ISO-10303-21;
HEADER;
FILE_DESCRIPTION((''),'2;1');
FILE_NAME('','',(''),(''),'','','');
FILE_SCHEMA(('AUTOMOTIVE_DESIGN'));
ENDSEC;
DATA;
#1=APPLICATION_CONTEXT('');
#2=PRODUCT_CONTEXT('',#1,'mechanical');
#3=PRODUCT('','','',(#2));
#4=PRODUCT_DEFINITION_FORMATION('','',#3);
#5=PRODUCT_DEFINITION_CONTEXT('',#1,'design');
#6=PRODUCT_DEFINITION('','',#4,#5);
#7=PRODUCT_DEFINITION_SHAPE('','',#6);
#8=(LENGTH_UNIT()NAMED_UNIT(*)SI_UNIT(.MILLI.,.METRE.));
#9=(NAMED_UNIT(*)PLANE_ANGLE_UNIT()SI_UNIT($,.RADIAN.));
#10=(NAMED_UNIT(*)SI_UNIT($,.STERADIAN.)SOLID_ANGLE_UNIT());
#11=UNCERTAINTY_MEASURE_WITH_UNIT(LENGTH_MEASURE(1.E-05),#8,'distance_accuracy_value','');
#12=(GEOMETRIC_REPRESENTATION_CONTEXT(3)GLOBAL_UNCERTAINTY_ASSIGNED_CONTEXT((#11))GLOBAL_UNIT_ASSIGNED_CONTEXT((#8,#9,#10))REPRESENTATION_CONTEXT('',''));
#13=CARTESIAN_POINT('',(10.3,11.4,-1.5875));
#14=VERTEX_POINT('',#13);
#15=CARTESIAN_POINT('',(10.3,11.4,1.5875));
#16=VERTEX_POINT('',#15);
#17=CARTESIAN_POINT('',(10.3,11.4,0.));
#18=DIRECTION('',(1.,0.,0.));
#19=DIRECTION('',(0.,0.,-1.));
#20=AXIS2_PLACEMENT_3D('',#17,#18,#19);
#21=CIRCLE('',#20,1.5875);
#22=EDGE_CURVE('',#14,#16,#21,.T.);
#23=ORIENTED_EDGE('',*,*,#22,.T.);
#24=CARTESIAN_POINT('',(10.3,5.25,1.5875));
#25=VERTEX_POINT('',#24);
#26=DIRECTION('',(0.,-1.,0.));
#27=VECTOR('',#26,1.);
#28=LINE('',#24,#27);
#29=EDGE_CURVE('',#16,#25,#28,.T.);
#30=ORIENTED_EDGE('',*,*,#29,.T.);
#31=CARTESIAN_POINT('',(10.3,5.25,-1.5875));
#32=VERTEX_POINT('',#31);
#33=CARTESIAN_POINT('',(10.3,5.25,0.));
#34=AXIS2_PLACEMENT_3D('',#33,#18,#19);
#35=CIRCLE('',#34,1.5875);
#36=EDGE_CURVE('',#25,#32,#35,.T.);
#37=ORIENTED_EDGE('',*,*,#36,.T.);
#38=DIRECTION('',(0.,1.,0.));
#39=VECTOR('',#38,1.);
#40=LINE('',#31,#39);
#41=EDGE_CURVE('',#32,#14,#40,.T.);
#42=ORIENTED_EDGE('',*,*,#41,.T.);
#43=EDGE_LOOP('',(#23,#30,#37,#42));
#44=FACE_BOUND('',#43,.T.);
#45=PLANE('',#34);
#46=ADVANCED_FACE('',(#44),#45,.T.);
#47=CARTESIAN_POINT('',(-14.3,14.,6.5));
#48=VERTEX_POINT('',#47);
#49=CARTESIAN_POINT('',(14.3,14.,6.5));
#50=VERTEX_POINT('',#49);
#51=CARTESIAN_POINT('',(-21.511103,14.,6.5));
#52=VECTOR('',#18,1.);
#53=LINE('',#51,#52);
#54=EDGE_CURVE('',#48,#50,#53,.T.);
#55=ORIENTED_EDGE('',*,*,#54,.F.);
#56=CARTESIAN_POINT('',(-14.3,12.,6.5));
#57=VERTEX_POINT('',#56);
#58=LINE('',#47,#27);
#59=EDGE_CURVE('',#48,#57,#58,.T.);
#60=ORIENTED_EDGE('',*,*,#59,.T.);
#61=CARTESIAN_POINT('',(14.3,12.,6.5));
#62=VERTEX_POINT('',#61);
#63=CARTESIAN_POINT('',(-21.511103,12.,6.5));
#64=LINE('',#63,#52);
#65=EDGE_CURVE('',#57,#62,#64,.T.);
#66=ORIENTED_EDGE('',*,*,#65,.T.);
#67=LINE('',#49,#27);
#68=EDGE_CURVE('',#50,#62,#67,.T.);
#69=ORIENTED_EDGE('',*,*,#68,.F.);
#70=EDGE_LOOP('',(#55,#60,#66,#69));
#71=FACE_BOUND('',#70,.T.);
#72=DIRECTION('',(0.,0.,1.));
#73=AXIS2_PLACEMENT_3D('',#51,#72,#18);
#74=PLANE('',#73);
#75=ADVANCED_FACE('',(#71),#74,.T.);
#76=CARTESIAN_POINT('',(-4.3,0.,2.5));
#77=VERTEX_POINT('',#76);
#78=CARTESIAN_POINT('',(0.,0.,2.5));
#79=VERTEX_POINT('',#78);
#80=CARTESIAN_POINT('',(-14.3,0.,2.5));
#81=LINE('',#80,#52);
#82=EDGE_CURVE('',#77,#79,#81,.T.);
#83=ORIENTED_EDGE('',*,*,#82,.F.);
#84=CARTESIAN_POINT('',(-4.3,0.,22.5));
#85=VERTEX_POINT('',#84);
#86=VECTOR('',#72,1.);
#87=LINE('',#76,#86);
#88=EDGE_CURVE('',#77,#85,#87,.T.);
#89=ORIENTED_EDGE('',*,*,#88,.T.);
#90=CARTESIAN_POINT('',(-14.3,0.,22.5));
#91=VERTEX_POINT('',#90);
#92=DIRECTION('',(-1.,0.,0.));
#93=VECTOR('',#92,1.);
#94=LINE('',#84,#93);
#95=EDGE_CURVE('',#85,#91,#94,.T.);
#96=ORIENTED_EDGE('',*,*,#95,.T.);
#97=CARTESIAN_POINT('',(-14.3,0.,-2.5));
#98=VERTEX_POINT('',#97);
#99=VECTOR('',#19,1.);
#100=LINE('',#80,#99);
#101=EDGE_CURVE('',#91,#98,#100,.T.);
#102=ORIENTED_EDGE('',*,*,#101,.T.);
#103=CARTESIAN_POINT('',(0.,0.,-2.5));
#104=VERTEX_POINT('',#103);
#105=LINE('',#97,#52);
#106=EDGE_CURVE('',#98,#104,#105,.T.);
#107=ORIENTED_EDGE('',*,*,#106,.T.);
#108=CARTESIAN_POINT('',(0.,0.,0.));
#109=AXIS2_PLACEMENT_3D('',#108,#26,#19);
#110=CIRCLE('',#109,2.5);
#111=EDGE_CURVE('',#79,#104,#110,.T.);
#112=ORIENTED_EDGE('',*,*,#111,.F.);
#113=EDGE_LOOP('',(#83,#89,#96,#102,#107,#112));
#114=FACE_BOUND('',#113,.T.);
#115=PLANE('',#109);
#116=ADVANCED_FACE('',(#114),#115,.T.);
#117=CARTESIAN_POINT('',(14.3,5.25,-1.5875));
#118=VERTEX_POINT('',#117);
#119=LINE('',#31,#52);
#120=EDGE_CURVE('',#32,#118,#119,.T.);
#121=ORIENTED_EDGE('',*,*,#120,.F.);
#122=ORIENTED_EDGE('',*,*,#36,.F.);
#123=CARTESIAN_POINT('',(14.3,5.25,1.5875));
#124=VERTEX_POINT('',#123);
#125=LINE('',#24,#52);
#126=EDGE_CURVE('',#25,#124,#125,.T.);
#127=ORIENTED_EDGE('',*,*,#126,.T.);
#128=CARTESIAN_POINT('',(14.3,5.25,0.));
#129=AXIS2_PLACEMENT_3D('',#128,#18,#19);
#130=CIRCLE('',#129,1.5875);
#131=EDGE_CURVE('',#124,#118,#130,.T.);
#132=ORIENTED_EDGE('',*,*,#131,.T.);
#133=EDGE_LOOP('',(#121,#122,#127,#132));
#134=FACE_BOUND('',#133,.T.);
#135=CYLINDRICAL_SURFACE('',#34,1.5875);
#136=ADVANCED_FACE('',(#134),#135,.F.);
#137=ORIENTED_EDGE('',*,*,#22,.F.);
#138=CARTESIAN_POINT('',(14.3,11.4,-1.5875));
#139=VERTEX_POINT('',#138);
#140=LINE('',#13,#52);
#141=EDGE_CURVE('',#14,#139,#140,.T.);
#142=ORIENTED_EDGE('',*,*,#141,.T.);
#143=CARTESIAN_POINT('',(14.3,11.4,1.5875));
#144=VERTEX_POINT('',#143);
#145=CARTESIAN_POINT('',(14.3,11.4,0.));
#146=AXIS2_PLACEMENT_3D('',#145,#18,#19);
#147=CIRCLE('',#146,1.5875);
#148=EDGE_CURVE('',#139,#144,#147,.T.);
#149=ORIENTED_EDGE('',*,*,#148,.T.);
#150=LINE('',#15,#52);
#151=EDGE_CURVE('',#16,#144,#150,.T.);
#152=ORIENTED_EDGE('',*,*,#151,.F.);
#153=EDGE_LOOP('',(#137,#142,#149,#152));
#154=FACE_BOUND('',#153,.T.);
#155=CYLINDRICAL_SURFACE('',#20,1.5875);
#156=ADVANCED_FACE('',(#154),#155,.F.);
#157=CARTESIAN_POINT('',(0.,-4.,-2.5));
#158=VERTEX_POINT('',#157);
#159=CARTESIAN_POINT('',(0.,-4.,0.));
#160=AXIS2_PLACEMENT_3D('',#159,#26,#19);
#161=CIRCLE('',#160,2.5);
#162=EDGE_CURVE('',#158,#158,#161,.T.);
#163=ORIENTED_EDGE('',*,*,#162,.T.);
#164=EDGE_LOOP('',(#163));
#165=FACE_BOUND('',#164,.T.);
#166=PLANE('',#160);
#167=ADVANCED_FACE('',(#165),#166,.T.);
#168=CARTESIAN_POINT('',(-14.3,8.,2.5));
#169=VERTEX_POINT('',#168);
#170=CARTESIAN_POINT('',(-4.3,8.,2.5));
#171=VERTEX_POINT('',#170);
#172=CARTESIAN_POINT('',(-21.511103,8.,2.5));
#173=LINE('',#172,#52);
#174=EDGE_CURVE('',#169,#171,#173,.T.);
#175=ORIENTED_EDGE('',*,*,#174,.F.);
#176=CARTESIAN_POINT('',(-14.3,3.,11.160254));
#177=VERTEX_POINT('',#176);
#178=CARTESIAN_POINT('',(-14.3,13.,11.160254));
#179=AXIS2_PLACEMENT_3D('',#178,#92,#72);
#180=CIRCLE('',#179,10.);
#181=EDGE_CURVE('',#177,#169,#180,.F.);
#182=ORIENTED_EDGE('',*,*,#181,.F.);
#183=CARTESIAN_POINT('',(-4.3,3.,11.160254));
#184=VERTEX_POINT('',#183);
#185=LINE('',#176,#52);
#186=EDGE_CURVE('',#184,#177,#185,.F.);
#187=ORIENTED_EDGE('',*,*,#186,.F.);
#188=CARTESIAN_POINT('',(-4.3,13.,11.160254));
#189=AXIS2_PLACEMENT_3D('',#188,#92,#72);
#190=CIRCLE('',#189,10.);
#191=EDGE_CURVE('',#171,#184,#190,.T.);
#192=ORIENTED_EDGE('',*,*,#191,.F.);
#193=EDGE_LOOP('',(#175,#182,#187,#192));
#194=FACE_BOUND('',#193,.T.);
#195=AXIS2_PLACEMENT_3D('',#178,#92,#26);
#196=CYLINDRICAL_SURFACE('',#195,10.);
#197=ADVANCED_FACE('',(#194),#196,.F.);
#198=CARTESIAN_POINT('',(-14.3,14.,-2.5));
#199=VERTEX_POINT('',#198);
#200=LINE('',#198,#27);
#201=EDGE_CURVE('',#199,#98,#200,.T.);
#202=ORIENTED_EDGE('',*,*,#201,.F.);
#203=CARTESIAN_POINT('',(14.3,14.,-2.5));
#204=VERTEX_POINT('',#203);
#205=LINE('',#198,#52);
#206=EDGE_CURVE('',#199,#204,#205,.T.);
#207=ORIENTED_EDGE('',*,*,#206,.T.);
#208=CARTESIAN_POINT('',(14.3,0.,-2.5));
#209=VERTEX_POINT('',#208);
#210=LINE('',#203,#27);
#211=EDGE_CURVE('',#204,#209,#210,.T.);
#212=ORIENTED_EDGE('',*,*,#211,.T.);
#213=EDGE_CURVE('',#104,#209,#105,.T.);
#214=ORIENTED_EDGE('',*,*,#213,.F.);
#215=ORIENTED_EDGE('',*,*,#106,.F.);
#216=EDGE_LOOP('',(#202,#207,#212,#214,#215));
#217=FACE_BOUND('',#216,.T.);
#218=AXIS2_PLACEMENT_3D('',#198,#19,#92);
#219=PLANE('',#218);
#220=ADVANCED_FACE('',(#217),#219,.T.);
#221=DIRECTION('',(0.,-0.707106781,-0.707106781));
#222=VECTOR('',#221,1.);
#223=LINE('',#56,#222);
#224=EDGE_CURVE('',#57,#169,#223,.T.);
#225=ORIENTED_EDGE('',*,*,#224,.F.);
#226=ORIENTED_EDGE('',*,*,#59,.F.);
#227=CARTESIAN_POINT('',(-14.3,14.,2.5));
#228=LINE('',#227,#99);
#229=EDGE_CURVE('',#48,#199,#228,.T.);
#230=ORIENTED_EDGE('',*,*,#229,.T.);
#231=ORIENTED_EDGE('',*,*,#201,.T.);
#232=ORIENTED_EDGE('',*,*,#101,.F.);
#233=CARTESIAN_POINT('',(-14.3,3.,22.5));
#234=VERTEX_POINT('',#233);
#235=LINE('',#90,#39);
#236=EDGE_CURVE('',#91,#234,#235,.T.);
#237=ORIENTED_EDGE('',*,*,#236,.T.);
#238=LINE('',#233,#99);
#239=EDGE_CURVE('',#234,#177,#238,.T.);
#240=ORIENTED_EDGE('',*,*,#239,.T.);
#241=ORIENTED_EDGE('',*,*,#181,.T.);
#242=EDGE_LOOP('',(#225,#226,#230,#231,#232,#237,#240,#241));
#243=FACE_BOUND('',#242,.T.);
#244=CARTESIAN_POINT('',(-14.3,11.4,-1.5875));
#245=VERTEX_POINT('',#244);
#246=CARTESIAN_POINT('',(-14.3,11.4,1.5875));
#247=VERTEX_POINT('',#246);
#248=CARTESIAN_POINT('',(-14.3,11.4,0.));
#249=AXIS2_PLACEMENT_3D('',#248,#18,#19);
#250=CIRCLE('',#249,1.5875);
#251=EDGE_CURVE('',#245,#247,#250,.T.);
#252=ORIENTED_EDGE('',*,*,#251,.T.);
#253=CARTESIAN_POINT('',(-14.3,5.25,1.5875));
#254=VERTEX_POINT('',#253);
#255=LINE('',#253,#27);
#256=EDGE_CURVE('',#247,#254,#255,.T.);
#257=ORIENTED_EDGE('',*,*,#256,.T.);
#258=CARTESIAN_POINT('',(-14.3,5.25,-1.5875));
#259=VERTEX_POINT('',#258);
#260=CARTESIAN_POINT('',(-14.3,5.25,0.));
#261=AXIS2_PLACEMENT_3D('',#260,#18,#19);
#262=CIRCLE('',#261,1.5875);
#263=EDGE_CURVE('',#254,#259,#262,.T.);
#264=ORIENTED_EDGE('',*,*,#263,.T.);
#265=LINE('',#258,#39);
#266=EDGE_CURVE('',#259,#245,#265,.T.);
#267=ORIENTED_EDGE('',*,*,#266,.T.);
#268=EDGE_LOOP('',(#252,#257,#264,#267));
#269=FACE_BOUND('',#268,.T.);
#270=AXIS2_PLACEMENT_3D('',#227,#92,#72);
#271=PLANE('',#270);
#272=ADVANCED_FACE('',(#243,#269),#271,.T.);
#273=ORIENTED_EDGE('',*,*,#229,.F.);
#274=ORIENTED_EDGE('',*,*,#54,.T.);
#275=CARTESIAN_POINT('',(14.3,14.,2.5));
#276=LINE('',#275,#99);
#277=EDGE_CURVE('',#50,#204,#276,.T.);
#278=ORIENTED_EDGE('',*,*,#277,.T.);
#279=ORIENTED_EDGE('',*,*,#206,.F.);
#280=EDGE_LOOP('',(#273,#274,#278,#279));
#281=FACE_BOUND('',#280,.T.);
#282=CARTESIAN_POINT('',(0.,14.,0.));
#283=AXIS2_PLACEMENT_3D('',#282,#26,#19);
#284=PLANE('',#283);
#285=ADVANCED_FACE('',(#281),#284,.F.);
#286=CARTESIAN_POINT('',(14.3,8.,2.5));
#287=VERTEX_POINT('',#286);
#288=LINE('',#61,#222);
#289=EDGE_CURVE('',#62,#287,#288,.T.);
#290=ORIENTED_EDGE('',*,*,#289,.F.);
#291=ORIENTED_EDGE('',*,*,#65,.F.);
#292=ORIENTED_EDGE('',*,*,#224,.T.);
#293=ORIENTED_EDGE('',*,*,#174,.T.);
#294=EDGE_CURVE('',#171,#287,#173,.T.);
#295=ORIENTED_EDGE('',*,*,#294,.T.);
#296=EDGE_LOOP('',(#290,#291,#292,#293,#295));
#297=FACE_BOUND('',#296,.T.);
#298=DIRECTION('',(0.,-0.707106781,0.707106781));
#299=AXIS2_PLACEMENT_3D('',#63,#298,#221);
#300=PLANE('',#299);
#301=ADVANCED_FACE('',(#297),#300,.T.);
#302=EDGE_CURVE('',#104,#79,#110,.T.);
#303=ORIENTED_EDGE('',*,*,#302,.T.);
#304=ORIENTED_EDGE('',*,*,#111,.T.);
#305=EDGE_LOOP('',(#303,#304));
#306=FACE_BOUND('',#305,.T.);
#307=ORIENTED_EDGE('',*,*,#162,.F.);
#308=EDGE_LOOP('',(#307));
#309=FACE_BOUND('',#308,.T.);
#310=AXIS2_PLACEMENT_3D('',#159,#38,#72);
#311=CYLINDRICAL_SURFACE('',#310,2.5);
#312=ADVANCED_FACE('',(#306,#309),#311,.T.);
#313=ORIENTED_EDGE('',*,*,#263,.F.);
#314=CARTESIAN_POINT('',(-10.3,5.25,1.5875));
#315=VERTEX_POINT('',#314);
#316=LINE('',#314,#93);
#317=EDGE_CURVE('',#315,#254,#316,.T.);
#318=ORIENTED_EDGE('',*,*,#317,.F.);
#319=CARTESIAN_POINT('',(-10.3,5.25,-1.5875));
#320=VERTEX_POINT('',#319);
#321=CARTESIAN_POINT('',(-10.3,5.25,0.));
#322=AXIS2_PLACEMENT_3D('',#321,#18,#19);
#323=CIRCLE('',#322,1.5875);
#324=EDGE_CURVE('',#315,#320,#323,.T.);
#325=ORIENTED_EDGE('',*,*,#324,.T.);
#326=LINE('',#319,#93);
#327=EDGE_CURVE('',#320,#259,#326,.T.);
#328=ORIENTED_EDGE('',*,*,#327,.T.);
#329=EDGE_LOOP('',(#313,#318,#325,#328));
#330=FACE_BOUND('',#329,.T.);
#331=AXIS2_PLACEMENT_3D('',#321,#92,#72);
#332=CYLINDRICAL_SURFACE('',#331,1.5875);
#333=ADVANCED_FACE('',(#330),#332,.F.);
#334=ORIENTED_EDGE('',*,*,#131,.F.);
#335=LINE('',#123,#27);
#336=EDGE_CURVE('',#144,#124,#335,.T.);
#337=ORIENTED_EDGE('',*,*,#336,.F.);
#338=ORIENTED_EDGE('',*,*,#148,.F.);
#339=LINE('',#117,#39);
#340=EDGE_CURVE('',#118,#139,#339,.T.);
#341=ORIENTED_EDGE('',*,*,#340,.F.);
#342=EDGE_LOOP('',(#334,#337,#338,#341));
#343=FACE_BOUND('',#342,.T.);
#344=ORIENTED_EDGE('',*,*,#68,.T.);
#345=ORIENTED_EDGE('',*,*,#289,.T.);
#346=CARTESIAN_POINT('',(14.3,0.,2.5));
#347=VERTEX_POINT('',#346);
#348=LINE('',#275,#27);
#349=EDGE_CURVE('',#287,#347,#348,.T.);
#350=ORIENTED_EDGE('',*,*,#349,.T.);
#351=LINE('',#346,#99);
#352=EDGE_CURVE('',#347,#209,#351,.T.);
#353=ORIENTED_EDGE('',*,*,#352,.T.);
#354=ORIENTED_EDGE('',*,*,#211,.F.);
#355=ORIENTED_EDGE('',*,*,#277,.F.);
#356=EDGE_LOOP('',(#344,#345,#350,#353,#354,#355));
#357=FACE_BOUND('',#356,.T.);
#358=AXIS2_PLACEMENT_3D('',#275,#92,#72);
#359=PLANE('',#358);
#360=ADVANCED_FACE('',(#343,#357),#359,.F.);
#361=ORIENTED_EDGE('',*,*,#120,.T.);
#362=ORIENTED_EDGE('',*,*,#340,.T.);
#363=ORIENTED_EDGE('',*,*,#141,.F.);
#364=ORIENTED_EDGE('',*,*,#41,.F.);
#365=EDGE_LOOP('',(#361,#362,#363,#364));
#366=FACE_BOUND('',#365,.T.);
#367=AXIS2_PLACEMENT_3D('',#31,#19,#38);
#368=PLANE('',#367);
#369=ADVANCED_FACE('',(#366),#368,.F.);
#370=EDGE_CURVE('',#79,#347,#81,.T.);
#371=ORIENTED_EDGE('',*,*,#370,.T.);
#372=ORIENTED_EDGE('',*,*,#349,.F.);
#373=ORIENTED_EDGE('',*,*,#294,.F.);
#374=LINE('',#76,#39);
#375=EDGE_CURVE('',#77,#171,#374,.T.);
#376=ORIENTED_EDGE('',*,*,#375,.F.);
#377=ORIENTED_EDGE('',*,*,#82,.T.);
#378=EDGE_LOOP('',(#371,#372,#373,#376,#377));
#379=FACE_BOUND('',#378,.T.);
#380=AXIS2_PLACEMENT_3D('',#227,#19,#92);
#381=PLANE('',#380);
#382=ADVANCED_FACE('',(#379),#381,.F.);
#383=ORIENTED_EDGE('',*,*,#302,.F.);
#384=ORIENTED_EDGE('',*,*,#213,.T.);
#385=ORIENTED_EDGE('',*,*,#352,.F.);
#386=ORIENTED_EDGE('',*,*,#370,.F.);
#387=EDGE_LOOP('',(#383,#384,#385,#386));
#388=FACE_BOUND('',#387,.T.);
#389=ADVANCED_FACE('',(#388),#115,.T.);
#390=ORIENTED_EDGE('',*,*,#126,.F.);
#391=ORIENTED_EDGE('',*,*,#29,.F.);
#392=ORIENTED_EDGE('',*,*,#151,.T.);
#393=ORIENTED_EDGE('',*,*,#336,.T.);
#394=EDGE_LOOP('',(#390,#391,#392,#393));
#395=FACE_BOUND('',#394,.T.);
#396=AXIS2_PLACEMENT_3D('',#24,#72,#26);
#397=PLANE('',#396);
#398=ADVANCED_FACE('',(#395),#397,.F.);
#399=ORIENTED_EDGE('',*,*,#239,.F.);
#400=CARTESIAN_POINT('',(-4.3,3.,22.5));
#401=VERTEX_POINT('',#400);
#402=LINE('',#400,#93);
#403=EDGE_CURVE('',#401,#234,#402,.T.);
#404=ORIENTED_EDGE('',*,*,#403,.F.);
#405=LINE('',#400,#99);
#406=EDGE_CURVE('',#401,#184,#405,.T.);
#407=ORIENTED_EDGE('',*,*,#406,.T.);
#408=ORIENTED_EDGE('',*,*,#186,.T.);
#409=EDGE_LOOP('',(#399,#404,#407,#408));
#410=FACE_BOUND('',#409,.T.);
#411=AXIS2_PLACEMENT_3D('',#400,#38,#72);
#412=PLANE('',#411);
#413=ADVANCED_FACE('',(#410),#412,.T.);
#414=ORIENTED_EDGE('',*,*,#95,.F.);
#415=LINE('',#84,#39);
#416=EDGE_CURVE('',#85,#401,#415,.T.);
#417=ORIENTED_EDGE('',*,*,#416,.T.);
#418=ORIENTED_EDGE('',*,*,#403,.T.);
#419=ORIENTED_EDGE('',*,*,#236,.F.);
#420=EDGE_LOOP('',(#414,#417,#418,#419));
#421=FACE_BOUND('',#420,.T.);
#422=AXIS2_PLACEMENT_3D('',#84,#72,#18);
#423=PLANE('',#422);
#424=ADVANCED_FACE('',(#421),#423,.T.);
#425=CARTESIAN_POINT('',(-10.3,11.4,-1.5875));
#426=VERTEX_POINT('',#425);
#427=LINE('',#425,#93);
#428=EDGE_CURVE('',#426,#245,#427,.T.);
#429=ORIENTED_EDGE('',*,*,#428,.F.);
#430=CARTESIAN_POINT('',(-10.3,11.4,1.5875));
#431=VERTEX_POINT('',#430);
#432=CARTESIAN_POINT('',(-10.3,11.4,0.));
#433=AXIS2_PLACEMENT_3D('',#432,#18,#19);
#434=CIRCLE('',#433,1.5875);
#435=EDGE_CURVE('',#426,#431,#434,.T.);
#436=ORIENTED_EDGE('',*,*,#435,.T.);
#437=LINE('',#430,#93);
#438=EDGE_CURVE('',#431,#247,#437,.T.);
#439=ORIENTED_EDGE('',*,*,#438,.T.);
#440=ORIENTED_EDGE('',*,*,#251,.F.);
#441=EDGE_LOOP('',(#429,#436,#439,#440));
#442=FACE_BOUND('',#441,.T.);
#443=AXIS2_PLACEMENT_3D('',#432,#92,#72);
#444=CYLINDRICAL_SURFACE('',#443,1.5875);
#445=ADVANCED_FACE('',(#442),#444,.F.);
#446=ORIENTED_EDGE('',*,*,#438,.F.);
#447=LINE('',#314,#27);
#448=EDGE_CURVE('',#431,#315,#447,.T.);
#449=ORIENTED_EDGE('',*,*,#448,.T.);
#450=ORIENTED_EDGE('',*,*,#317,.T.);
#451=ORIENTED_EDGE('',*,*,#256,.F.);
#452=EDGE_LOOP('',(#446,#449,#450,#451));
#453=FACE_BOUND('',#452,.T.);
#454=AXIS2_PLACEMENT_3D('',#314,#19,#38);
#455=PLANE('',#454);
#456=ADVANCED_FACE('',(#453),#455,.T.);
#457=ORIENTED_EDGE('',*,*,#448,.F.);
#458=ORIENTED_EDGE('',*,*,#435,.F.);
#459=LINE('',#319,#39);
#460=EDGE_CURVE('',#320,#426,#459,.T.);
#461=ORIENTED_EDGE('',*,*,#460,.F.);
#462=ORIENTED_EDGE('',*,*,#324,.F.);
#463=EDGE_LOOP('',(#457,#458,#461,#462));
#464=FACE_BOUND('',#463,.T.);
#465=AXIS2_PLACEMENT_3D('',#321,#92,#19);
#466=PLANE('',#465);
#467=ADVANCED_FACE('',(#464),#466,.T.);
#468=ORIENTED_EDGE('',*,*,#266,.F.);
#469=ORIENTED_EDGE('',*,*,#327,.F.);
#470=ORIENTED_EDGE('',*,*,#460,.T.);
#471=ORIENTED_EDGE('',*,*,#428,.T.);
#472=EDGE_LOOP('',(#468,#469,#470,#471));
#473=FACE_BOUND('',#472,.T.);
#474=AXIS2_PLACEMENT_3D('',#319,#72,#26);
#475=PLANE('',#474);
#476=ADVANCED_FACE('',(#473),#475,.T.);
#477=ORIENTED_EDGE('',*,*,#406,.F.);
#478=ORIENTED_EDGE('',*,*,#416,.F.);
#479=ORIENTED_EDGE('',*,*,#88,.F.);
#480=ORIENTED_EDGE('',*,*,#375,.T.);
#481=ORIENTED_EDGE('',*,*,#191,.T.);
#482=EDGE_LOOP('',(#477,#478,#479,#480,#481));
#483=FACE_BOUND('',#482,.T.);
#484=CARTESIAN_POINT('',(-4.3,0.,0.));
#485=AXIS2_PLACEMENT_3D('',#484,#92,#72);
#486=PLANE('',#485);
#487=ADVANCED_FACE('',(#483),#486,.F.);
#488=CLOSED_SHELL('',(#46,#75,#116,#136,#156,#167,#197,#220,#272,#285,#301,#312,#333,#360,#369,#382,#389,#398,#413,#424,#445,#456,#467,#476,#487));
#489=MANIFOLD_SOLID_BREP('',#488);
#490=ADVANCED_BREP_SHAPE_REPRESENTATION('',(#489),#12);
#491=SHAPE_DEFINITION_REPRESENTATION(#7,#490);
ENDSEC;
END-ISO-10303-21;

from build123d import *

# Parameters (mm, degrees)
SKETCH1_W           = 28.6
SKETCH1_H           = 5
BOSS_EXTRUDE1_DEPTH = 14
CUT_EXTRUDE1_DEPTH  = 4
SKETCH5_R           = 2.5
BOSS_EXTRUDE4_DEPTH = 4
BOSS_EXTRUDE5_DEPTH = 28.6
SKETCH7_W           = 20
SKETCH7_H           = 3
BOSS_EXTRUDE6_DEPTH = 10
FILLET1_R           = 10


with BuildPart() as part:
    # Sketch1 → Boss-Extrude1 (new body)
    with BuildSketch(Plane(origin=(0, 0, 0), x_dir=(1, 0, 0), z_dir=(0, 1, 0))):
        Rectangle(SKETCH1_W, SKETCH1_H)
    extrude(amount=BOSS_EXTRUDE1_DEPTH)

    # Sketch2 → Cut-Extrude1 (cut)
    with BuildSketch(Plane(origin=(14.3, 0, 0), x_dir=(0, 0, -1), z_dir=(1, 0, 0))):
        with BuildLine():
            Line((-1.5875, 5.25), (-1.5875, 11.4))
            ThreePointArc((-1.5875, 11.4), (0, 12.9875), (1.5875, 11.4))
            Line((1.5875, 11.4), (1.5875, 5.25))
            ThreePointArc((1.5875, 5.25), (0, 3.6625), (-1.5875, 5.25))
        make_face()
    cut_extrude1 = extrude(amount=-CUT_EXTRUDE1_DEPTH, mode=Mode.SUBTRACT)

    # Sketch5 → Boss-Extrude4 (add)
    with BuildSketch(Plane.XZ):
        with Locations(Location((0, 0, 0), (0, 0, 270))):
            Circle(SKETCH5_R)
    extrude(amount=BOSS_EXTRUDE4_DEPTH)

    # Sketch6 → Boss-Extrude5 (add)
    with BuildSketch(Plane(origin=(14.3, 0, 0), x_dir=(0, 0, -1), z_dir=(1, 0, 0))):
        Polygon((-2.5, 14), (-6.5, 14), (-6.5, 12), (-2.5, 8), align=None)
    extrude(amount=-BOSS_EXTRUDE5_DEPTH)

    # Mirror1: Cut-Extrude1 across plane
    add(cut_extrude1.mirror(Plane(origin=(0, 0, 0), x_dir=(0, 0, 1), z_dir=(1, 0, 0))), mode=Mode.SUBTRACT)

    # Sketch7 → Boss-Extrude6 (add)
    with BuildSketch(Plane.ZY.offset(14.3)):
        with Locations((12.5, 1.5)):
            Rectangle(SKETCH7_W, SKETCH7_H)
    extrude(amount=-BOSS_EXTRUDE6_DEPTH)

    # Fillet1
    # the kernel refuses this fillet: 10 mm, written as the material it adds along each edge
    with BuildSketch(Plane(origin=(-14.3, 3, 2.5), x_dir=(0, 1, 0), z_dir=(1, 0, 0))) as fillet1_piece_1:
        with BuildLine():
            CenterArc((10, 8.660254038), FILLET1_R, 180, 60)
            Line((0, 8.660254038), (-0.2, 8.660254038))
            Line((-0.2, 8.660254038), (-0.2, 0))
            Line((-0.2, 0), (0, -0.2))
            ThreePointArc((0, -0.2), (2.5, -0.2), (4.9, -0.173205081))
            Line((4.9, -0.173205081), (5, 0))
        make_face()
    extrude(amount=10)


solid = part.part
